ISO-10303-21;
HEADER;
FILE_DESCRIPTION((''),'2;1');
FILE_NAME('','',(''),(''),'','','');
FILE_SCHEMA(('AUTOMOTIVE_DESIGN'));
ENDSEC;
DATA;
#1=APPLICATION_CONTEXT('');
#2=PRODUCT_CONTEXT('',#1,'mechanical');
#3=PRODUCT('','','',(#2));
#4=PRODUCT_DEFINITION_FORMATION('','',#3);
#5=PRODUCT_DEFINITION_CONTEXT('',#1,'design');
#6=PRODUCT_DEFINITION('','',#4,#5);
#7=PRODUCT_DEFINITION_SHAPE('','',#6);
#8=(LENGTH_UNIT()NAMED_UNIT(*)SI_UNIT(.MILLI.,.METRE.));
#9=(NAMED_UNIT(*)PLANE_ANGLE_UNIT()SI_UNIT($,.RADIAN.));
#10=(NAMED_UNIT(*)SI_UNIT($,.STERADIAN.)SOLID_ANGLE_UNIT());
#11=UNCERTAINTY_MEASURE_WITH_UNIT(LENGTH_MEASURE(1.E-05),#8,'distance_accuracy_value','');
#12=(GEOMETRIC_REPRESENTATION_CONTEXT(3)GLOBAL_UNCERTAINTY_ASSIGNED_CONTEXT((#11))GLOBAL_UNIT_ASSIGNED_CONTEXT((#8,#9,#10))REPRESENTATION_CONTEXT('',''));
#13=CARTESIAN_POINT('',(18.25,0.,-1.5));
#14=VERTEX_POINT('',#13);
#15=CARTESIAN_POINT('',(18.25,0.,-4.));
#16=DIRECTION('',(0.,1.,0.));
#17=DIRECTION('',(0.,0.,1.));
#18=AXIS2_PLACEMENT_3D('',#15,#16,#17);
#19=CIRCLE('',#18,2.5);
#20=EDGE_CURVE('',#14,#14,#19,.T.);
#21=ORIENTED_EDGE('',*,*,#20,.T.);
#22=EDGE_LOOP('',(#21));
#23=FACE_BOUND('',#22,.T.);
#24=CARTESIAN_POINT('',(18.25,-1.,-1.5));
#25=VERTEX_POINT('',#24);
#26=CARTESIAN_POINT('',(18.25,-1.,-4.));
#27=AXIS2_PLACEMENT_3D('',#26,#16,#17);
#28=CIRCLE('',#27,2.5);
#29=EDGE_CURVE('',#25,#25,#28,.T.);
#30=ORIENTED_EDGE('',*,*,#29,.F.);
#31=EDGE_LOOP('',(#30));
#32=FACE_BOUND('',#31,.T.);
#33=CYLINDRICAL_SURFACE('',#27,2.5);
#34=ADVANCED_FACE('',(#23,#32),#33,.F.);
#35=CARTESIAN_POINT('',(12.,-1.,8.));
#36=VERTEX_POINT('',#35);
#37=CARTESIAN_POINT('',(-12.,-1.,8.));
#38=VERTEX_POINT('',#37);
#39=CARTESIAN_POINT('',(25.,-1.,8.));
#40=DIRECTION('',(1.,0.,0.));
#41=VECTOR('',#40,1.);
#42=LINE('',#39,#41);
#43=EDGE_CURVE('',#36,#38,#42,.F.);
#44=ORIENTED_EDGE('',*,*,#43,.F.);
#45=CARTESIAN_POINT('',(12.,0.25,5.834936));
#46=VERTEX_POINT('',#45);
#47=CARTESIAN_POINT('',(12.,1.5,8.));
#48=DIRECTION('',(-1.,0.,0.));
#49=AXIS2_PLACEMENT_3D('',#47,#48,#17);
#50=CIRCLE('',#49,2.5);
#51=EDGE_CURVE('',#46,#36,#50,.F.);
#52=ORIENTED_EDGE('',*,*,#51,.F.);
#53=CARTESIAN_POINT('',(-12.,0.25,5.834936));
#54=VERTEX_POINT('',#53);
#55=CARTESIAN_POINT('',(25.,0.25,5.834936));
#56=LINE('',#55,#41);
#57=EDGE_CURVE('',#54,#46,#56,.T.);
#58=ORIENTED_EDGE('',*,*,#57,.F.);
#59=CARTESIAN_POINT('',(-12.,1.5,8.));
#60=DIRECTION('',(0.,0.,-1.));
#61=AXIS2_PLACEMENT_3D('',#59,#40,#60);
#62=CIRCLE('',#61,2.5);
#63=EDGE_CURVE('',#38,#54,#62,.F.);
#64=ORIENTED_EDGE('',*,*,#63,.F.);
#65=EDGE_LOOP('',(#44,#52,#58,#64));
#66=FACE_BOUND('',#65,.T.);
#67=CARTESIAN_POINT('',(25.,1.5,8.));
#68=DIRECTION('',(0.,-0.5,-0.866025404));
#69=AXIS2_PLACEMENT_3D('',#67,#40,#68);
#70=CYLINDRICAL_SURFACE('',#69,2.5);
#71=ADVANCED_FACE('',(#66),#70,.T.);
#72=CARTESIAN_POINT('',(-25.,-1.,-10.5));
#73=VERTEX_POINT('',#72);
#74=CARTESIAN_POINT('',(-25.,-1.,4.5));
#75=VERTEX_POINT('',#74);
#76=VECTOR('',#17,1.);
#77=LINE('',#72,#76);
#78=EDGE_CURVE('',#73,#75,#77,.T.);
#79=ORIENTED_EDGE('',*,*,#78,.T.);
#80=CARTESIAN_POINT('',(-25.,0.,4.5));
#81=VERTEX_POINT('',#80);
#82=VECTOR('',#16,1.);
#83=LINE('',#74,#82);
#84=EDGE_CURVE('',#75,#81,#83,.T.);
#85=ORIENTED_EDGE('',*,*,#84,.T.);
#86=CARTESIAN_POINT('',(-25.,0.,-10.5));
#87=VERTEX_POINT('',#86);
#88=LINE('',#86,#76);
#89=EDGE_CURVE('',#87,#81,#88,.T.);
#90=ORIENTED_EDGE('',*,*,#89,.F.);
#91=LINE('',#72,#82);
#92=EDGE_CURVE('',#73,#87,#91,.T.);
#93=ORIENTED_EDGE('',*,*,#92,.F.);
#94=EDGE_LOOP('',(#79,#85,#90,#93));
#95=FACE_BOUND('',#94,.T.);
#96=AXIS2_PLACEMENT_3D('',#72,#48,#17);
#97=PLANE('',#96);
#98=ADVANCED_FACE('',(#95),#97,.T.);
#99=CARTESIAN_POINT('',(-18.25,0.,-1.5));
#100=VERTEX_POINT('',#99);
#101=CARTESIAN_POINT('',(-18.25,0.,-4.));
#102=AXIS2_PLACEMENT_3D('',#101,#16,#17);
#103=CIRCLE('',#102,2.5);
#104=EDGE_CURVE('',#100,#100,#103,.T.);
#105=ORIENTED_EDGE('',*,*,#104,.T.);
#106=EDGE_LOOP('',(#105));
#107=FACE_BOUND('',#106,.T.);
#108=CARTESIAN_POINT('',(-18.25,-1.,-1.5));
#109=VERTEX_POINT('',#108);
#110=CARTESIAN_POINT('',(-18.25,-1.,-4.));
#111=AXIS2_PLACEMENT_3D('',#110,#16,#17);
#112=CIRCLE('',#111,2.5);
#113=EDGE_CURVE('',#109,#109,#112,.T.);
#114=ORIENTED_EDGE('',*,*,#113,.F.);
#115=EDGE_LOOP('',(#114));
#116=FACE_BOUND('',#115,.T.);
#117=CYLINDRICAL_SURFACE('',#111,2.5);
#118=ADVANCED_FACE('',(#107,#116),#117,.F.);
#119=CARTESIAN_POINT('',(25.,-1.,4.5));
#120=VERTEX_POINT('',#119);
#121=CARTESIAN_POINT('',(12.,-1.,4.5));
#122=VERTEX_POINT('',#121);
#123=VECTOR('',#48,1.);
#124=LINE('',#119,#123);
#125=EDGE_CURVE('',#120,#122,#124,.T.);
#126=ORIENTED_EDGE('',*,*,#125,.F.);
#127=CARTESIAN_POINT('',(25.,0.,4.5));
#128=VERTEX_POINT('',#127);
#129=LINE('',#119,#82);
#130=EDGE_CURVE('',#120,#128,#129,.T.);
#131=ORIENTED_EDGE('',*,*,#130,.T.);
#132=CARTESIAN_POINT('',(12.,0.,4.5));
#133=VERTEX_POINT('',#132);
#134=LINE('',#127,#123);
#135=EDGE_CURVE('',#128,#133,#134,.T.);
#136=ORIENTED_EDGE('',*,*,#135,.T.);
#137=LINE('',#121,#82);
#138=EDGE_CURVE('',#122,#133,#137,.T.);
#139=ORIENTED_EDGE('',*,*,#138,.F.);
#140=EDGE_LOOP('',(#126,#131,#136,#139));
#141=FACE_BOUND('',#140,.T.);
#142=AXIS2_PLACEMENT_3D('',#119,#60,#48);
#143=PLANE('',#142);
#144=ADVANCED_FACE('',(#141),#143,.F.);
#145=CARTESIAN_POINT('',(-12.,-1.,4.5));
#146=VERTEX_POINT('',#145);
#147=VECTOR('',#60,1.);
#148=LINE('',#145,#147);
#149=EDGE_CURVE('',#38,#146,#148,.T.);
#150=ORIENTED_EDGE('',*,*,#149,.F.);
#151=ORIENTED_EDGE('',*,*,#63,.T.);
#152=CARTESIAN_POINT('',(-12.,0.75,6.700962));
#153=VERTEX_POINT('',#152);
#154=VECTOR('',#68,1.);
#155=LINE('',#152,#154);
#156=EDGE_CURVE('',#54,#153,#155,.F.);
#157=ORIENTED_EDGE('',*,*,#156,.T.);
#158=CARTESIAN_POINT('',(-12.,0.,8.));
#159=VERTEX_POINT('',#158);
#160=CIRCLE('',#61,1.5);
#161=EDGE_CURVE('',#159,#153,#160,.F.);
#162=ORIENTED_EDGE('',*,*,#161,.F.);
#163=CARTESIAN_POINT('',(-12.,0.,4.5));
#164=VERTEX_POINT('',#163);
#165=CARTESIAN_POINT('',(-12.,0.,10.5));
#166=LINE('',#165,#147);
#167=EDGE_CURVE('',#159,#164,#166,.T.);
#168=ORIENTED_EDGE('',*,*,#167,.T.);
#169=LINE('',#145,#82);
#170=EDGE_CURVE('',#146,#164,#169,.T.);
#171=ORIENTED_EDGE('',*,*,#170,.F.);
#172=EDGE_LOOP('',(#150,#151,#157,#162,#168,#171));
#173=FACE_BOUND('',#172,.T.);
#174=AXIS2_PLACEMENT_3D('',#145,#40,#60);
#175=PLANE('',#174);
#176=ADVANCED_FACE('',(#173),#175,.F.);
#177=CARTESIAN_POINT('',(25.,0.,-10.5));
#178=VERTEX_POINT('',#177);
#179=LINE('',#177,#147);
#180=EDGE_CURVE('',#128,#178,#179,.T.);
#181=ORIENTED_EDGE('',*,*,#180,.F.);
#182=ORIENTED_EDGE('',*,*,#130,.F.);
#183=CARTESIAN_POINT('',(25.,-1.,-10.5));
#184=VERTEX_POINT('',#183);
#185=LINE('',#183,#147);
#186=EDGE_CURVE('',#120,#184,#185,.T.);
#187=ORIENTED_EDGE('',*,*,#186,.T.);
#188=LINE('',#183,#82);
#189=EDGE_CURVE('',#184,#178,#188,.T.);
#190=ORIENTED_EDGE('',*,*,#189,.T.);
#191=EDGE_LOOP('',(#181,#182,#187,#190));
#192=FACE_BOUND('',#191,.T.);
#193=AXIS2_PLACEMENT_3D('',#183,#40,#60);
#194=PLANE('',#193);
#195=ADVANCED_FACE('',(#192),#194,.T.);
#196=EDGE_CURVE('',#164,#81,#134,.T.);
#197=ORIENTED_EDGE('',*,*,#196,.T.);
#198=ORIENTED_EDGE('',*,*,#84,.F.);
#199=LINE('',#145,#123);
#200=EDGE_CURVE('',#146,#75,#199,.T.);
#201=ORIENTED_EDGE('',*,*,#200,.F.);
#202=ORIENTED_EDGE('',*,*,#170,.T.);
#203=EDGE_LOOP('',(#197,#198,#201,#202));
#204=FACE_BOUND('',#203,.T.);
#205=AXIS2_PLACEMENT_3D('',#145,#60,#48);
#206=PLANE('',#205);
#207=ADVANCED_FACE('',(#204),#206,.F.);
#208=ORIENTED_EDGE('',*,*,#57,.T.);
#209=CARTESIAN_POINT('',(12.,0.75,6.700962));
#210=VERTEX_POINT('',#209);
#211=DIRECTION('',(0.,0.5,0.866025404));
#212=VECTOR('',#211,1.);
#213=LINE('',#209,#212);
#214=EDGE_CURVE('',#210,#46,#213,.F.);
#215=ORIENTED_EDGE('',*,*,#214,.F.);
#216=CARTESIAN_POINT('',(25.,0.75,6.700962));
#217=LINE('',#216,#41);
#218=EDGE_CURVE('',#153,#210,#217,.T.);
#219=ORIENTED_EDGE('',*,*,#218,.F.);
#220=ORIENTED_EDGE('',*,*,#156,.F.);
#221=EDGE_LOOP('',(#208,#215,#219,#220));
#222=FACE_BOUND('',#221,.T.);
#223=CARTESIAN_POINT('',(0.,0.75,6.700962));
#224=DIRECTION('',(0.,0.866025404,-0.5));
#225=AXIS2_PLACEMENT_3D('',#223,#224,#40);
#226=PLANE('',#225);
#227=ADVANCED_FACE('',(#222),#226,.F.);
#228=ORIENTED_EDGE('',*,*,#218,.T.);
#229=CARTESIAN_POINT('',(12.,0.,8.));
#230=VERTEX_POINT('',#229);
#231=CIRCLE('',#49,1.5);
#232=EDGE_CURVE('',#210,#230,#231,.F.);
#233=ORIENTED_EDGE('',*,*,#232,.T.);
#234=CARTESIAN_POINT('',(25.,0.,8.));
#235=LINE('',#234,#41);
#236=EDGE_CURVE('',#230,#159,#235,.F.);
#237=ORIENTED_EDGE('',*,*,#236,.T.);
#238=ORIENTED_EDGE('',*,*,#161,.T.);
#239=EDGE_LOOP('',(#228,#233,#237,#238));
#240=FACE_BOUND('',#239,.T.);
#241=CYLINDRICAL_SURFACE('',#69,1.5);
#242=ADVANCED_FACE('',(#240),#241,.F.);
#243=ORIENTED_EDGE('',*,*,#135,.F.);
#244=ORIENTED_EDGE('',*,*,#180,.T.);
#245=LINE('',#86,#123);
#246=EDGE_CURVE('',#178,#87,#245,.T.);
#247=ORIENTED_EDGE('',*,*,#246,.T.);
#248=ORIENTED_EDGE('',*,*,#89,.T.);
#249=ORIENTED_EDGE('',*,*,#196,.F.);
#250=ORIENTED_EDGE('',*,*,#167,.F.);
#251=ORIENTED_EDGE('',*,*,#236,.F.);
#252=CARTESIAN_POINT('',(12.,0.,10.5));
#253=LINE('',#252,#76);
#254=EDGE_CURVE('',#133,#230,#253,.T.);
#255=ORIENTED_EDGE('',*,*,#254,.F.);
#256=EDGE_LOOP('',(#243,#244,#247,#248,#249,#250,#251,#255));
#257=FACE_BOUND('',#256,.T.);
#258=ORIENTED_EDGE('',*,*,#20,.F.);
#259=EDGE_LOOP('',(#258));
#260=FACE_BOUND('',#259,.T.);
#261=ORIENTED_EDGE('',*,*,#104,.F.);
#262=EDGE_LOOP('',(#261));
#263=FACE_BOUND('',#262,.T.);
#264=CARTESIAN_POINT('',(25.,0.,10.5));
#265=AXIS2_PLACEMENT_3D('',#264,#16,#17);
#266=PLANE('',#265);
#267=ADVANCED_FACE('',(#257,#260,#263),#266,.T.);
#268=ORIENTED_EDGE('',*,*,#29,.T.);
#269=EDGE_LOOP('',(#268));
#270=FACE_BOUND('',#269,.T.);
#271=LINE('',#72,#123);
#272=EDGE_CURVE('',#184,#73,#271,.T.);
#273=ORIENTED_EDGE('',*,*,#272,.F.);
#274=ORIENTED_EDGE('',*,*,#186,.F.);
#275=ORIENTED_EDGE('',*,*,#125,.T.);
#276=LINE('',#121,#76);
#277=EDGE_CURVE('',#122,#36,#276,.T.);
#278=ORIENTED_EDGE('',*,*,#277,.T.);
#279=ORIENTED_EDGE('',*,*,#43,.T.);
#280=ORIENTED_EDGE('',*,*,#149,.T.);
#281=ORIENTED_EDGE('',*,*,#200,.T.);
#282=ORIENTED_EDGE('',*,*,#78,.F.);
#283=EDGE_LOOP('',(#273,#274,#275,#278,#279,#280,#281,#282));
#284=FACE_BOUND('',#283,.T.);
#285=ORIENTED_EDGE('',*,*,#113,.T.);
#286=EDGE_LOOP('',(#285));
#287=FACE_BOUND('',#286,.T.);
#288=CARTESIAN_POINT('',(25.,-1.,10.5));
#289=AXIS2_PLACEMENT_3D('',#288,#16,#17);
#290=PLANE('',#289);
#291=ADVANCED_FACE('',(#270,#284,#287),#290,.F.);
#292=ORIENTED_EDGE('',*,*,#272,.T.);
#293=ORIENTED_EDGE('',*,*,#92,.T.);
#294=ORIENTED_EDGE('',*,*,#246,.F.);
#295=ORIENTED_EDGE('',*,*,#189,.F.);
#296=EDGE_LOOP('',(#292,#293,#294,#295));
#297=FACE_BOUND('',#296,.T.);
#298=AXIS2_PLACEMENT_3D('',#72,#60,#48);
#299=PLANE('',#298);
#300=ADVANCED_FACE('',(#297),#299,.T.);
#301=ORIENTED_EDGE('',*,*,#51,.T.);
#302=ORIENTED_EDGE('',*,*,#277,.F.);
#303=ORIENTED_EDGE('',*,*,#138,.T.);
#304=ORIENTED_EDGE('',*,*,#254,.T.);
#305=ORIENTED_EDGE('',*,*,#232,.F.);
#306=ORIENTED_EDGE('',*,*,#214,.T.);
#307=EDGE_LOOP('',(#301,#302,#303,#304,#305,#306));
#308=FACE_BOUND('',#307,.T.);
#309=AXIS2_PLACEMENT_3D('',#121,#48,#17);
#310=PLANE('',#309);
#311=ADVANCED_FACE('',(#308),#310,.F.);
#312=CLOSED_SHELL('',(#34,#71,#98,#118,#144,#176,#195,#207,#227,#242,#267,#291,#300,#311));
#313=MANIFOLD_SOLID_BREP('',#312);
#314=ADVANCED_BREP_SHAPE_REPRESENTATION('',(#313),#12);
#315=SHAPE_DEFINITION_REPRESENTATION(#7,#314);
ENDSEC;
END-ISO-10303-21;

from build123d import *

# Parameters (mm, degrees)
SKETCH2_W               = 50
SKETCH2_H               = 21
BASE_FLANGE1_DEPTH      = 1
HEM1_START              = -25
HEM1_DEPTH              = 50
HEM1_2_DEPTH            = 50
CUT_EXTRUDE1_DEPTH      = 28.408940147
CUT_EXTRUDE1_DEPTH_BACK = 28.408940147
SKETCH5_W               = 13
SKETCH5_H               = 6
SKETCH6_R               = 2.5
CUT_EXTRUDE2_DEPTH      = 28.408940147


# Read off the part's stored shape, not the designer's step: Hem1
# Sheet-metal steps are written as plain solids
with BuildPart() as part:
    # Sketch2 → Base-Flange1 (new body)
    with BuildSketch(Plane(origin=(0, 0, 0), x_dir=(1, 0, 0), z_dir=(0, 1, 0))):
        Rectangle(SKETCH2_W, SKETCH2_H)
    extrude(amount=-BASE_FLANGE1_DEPTH)

    # Hem1 outline → Hem1 (cut)
    with BuildSketch(Plane.YZ.offset(HEM1_START)):
        with BuildLine():
            ThreePointArc((-1, 8), (-0.736067978, 9.118033989), (0, 10))
            Line((0, 10), (0, 10.5))
            Line((0, 10.5), (-1, 10.5))
            Line((-1, 10.5), (-1, 8))
        make_face()
    extrude(amount=HEM1_DEPTH, mode=Mode.SUBTRACT)

    # Hem1 2 outline → Hem1 2 (add)
    with BuildSketch(Plane.YZ.offset(HEM1_START)):
        with BuildLine():
            Line((0.75, 6.700961894), (0.25, 5.834936491))
            ThreePointArc((0.25, 5.834936491), (3.995508667, 8.149788152), (0, 10))
            Line((0, 10), (0, 8))
            ThreePointArc((0, 8), (2.799038106, 8.75), (0.75, 6.700961894))
        make_face()
    extrude(amount=HEM1_2_DEPTH)

    # Sketch5 → Cut-Extrude1 (cut, two sides: drawn at the far end of the back side and taken through both)
    with BuildSketch(Plane(origin=(0, 0, 0), x_dir=(1, 0, 0), z_dir=(0, 1, 0)).offset(-CUT_EXTRUDE1_DEPTH_BACK)):
        with Locations((18.5, -7.5)):
            Rectangle(SKETCH5_W, SKETCH5_H)
        with Locations((-18.5, -7.5)):
            Rectangle(SKETCH5_W, SKETCH5_H)
    extrude(amount=CUT_EXTRUDE1_DEPTH + CUT_EXTRUDE1_DEPTH_BACK, mode=Mode.SUBTRACT)

    # Sketch6 → Cut-Extrude2 (cut, through all)
    with BuildSketch(Plane(origin=(0, 0, 0), x_dir=(1, 0, 0), z_dir=(0, 1, 0))):
        with Locations(Location((18.25, 4, 0), (0, 0, 270))):
            Circle(SKETCH6_R)
        with Locations(Location((-18.25, 4, 0), (0, 0, 270))):
            Circle(SKETCH6_R)
    extrude(amount=-CUT_EXTRUDE2_DEPTH, mode=Mode.SUBTRACT)


solid = part.part
